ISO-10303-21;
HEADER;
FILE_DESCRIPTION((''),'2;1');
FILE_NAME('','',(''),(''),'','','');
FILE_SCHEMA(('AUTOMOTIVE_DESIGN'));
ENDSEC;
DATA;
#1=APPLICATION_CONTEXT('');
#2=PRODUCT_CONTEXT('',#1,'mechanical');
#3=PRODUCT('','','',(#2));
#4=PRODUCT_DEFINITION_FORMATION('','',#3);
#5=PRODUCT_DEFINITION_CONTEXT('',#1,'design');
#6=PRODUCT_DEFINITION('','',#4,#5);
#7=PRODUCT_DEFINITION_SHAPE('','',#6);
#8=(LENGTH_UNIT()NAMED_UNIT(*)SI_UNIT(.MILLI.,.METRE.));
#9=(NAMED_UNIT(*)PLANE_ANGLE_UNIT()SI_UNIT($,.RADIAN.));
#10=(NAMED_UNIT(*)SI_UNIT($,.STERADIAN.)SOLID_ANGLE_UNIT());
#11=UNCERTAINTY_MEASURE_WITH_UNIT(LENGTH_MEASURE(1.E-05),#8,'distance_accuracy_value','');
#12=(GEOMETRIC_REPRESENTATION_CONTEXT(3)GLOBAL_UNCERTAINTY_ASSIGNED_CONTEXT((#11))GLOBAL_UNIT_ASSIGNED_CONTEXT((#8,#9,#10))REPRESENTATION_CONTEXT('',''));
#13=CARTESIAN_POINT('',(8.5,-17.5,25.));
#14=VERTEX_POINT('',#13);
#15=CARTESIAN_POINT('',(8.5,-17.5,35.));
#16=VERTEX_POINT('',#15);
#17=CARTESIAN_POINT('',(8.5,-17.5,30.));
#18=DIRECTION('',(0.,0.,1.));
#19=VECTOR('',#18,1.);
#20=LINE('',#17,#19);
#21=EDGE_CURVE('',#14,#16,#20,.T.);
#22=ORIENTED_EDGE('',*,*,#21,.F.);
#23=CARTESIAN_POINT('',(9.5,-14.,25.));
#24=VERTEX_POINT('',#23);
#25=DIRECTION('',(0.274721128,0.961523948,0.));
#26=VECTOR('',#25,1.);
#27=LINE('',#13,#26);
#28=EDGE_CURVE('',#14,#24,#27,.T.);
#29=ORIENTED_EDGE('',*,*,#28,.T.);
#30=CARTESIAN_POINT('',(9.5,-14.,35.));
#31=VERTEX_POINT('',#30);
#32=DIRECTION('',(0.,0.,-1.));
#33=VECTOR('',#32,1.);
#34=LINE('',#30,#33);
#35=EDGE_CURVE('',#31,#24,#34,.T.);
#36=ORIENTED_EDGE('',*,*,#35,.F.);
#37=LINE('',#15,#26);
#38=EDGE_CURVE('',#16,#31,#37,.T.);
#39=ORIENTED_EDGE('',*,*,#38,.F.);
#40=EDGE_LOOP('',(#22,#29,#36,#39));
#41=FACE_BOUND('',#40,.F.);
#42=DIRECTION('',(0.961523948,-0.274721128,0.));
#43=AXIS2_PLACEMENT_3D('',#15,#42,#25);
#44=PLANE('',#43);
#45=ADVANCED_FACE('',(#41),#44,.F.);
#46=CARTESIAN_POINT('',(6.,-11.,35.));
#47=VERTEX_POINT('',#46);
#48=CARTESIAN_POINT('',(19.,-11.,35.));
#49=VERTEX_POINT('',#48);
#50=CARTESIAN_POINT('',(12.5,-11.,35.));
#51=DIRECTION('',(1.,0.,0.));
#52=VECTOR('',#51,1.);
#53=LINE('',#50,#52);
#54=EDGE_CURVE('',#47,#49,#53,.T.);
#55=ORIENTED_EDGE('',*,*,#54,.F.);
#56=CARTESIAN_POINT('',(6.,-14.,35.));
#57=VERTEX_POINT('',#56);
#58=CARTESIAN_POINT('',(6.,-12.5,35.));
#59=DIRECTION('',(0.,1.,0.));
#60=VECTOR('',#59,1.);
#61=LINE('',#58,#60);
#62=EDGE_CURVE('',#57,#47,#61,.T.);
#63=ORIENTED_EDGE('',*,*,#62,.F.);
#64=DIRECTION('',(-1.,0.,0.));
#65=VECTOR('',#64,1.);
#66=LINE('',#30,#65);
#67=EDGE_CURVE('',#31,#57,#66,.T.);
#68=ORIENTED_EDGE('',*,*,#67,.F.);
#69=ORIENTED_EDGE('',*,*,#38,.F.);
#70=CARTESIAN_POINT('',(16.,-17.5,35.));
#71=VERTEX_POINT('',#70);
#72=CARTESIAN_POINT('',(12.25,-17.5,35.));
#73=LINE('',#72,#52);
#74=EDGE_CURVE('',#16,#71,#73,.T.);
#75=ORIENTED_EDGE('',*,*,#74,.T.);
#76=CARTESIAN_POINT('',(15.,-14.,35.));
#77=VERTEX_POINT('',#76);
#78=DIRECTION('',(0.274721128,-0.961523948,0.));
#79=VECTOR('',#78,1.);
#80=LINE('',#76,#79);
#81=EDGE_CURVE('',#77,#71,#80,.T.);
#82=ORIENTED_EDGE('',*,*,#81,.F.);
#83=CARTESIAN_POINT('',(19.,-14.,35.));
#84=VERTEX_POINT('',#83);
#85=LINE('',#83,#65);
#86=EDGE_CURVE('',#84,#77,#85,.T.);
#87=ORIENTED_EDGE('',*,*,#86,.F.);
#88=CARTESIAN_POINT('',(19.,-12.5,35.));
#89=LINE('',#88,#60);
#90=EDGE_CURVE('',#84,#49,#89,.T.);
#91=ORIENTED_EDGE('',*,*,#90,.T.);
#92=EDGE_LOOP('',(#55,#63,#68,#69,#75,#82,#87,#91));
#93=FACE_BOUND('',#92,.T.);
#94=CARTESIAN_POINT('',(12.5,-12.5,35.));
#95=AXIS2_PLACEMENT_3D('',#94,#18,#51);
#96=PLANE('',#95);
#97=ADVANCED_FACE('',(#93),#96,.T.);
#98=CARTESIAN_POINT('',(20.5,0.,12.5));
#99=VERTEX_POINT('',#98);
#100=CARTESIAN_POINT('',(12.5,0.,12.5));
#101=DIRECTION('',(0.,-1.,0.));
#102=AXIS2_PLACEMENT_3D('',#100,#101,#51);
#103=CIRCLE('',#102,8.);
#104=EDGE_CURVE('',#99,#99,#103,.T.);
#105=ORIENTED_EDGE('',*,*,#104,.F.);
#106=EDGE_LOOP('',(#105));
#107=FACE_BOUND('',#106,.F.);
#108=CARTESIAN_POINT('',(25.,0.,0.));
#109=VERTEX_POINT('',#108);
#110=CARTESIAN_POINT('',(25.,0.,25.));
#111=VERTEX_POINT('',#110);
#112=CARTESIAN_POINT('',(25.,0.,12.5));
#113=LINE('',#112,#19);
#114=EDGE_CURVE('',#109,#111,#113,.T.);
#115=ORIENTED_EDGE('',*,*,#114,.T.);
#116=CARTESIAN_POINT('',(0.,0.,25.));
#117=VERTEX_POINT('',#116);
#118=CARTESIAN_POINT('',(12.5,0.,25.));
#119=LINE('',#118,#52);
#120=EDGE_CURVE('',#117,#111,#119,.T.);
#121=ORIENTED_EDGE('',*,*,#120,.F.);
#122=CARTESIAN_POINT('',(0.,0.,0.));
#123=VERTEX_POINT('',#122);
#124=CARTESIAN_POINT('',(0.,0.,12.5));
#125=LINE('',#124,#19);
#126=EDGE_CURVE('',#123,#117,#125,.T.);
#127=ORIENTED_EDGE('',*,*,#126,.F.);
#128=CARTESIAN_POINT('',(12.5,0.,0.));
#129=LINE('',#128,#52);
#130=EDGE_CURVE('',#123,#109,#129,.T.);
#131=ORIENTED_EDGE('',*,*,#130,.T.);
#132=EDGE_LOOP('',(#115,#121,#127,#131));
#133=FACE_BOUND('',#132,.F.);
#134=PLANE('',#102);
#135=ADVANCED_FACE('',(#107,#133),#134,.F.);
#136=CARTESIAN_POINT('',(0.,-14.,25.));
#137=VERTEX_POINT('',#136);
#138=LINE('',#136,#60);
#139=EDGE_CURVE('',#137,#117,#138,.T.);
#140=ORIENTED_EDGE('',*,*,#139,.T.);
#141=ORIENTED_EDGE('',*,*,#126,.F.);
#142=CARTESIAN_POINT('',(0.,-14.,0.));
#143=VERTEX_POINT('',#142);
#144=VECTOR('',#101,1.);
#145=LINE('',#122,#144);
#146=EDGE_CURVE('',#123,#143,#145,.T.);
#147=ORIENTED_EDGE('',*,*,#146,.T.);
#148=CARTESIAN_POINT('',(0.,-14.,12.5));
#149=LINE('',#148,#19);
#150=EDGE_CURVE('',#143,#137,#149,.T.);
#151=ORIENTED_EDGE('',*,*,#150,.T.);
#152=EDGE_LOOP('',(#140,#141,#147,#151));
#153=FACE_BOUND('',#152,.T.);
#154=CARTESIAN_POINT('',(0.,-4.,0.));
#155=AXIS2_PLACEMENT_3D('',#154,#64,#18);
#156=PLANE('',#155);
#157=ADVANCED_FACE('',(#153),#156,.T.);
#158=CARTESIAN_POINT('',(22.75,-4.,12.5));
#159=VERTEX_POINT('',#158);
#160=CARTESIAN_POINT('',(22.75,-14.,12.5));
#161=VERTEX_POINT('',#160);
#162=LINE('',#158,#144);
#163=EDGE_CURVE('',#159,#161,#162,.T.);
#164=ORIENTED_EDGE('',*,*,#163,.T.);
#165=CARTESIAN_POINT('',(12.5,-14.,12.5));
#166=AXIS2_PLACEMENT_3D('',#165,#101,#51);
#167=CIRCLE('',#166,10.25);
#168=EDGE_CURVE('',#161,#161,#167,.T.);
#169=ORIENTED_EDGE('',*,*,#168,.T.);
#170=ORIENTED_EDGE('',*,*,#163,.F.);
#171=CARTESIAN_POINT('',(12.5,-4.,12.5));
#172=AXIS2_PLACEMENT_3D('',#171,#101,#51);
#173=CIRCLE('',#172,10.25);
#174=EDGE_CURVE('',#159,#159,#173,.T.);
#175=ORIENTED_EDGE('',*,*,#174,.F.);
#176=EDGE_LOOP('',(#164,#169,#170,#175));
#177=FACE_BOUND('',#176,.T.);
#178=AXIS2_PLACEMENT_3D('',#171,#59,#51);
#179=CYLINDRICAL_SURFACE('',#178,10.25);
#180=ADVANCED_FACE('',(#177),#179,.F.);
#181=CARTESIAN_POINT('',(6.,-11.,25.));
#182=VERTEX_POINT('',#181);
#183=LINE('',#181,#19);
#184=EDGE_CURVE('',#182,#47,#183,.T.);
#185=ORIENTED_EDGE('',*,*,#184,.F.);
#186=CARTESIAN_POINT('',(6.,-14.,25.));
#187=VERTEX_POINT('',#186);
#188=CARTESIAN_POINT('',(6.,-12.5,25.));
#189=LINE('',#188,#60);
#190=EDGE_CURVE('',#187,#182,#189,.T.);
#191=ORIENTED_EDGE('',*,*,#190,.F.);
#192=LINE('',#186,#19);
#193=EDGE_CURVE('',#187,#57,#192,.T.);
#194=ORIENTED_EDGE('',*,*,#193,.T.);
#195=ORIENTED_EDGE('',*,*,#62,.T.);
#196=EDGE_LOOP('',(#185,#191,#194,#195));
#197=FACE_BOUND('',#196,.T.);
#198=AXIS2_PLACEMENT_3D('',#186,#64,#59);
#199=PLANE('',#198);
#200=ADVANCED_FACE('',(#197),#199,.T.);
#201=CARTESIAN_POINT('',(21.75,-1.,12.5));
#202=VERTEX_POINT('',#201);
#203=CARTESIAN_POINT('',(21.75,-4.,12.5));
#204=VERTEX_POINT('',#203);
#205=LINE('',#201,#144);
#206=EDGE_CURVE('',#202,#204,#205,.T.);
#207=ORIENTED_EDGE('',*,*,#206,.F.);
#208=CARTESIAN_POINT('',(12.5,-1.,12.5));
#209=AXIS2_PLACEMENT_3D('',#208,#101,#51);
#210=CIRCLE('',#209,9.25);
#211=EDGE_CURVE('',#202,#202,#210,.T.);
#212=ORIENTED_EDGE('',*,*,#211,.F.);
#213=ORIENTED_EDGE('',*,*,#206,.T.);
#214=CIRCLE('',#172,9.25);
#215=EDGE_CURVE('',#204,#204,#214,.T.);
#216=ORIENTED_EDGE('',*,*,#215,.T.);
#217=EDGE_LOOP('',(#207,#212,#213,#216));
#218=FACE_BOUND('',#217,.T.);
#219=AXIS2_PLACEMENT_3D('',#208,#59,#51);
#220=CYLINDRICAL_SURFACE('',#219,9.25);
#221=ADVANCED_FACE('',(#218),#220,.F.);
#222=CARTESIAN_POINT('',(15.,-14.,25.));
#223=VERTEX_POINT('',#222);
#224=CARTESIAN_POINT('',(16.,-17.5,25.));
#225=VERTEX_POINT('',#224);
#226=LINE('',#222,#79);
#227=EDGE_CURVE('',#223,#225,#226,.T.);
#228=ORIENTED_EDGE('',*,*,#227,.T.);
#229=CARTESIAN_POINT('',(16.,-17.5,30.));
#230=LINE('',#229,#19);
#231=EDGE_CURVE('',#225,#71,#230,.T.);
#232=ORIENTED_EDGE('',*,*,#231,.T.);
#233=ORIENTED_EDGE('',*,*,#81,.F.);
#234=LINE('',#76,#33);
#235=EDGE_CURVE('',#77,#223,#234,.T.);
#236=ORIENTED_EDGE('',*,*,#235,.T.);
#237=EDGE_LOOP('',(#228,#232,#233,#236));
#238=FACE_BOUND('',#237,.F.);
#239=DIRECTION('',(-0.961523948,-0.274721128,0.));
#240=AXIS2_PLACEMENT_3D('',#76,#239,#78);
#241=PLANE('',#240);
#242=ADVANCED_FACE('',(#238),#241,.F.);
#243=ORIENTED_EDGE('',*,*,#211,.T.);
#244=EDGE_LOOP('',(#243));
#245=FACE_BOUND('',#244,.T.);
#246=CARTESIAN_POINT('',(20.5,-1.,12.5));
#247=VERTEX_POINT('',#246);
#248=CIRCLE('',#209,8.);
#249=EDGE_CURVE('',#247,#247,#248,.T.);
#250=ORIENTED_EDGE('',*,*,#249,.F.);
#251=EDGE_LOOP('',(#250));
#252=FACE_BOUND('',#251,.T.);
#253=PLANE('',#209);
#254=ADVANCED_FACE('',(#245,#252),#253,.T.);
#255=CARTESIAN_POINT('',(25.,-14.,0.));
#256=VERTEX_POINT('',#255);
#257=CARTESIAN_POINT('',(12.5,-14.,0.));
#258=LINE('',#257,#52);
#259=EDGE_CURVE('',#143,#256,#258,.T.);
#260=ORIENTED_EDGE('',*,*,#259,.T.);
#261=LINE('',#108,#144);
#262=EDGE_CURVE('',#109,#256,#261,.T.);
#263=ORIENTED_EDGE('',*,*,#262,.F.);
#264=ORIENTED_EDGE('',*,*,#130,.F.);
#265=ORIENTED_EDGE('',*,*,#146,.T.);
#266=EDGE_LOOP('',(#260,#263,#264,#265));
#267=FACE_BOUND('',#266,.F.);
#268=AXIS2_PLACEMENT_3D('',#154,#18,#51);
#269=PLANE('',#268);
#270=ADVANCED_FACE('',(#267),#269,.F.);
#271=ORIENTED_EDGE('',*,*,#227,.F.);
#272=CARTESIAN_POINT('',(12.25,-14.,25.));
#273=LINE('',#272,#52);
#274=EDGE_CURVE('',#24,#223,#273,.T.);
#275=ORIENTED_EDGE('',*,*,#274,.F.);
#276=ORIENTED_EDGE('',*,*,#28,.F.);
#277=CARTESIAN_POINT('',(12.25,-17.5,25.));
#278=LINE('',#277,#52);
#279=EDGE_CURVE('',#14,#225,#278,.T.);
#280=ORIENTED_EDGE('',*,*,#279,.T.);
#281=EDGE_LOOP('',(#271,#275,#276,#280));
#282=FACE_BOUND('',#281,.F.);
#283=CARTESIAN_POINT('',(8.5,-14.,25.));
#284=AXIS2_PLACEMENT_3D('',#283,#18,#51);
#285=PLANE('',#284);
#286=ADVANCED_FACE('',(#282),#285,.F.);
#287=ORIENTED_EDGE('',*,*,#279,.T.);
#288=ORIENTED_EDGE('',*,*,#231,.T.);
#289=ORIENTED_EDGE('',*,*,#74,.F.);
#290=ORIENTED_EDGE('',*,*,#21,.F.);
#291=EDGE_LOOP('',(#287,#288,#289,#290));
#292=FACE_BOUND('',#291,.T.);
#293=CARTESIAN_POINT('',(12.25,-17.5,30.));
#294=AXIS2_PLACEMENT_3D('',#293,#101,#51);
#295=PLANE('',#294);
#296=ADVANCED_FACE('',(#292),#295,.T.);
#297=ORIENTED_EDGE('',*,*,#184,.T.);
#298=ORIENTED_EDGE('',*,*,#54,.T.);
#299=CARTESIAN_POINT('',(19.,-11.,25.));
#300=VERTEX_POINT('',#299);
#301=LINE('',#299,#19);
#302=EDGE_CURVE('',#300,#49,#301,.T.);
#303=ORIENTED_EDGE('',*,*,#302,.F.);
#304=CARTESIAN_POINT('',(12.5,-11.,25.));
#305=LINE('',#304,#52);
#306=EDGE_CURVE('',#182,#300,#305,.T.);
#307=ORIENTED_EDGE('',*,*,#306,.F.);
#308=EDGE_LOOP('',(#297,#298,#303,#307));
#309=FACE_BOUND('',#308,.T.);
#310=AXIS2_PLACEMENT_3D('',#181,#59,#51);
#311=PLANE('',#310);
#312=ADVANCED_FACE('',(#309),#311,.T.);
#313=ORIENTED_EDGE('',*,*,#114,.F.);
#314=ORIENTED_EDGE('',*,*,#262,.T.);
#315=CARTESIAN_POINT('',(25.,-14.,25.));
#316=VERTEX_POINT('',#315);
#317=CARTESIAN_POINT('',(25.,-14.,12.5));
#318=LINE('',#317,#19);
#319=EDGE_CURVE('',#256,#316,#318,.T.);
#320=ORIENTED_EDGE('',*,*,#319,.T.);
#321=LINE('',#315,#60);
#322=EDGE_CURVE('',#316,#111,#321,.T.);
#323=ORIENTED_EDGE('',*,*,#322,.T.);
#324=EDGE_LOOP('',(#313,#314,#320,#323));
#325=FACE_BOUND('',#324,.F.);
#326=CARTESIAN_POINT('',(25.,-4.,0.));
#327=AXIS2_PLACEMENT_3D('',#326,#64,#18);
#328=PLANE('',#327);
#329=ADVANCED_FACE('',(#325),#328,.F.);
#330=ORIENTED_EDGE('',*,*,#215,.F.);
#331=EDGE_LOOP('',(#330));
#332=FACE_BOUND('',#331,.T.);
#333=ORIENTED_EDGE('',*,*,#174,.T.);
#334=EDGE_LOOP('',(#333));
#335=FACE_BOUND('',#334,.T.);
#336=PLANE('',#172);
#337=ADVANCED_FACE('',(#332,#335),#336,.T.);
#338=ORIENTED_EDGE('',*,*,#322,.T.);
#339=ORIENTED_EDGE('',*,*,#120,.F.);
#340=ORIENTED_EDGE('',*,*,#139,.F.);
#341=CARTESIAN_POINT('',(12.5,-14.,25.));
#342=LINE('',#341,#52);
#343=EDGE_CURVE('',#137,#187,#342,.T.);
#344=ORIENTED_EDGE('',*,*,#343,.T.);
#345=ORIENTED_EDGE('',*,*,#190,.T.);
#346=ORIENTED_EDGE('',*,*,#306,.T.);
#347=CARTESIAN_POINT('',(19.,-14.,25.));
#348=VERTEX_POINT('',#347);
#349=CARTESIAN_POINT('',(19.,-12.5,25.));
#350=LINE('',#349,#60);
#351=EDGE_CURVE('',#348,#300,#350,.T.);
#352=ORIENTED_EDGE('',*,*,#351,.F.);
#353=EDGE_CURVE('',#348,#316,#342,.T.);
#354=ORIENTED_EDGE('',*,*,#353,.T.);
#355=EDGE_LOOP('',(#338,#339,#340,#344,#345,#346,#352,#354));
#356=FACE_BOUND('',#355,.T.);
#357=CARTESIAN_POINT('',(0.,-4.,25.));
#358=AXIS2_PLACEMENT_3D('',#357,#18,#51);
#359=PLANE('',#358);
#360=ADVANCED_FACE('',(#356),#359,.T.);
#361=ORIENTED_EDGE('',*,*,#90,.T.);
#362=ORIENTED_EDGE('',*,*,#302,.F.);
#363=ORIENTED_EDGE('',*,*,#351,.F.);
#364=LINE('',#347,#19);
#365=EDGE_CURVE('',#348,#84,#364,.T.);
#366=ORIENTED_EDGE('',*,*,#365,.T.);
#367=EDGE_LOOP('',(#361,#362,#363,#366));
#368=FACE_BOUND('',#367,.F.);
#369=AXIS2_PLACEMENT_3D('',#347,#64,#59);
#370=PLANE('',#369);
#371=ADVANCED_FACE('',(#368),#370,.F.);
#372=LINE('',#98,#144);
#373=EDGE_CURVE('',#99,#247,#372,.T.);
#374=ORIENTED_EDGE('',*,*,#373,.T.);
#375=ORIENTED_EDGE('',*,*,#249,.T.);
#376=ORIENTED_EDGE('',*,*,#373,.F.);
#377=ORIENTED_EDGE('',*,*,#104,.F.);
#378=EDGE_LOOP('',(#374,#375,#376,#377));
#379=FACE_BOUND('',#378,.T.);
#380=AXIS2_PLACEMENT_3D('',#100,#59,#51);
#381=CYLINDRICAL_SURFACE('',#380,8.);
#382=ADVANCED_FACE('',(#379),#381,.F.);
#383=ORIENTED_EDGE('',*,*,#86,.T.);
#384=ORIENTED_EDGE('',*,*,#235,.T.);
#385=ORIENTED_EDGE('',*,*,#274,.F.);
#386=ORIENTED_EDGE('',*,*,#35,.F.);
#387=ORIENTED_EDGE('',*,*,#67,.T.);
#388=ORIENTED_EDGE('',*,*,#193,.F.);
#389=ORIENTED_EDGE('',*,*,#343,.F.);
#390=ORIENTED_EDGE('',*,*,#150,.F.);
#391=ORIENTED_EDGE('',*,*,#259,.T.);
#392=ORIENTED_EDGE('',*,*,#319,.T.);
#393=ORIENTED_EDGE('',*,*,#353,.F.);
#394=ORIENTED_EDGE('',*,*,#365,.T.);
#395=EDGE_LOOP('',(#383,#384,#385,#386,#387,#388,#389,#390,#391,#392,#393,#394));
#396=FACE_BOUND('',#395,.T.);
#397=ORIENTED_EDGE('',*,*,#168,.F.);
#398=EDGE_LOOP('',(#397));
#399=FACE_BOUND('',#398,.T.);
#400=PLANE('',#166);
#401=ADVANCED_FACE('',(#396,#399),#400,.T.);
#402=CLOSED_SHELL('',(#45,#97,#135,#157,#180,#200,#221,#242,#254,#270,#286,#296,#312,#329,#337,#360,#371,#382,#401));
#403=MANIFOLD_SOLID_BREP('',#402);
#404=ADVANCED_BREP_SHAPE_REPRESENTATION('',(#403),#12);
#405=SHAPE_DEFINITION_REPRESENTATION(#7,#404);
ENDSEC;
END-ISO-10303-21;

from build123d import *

# Parameters (mm, degrees)
F0_W      = 25
F0_H      = 25
F0_R      = 10.25
F0_R_2    = 9.25
F0_R_3    = 8
F1_DEPTH  = 1
F2_W      = 25
F2_H      = 25
F2_R      = 9.25
F3_DEPTH  = 3
F4_W      = 25
F4_H      = 25
F4_R      = 10.25
F5_DEPTH  = 10
F6_W      = 13
F6_H      = 3
F7_DEPTH  = 10
F8_W      = 7.5
F8_H      = 10
F9_DEPTH  = 3.5
F11_DEPTH = 10
F12_DEPTH = 10


with BuildPart() as f1:
    # F0 (on Front) → F1 (new body)
    with BuildSketch(Plane.XZ):
        with Locations((12.5, 12.5)):
            Rectangle(F0_W, F0_H)
        with Locations((12.5, 12.5)):
            Circle(F0_R, mode=Mode.SUBTRACT)
        with Locations((12.5, 12.5)):
            Circle(F0_R)
        with Locations((12.5, 12.5)):
            Circle(F0_R_2, mode=Mode.SUBTRACT)
        with Locations((12.5, 12.5)):
            Circle(F0_R_2)
        with Locations((12.5, 12.5)):
            Circle(F0_R_3, mode=Mode.SUBTRACT)
    extrude(amount=F1_DEPTH)

    # F2 (on face) → F3 (join)
    with BuildSketch(Plane.XZ.offset(1)):
        with Locations((12.5, 12.5)):
            Rectangle(F2_W, F2_H)
        with Locations((12.5, 12.5)):
            Circle(F2_R, mode=Mode.SUBTRACT)
    extrude(amount=F3_DEPTH)

    # F4 (on face) → F5 (join)
    with BuildSketch(Plane.XZ.offset(4)):
        with Locations((12.5, 12.5)):
            Rectangle(F4_W, F4_H)
        with Locations((12.5, 12.5)):
            Circle(F4_R, mode=Mode.SUBTRACT)
    extrude(amount=F5_DEPTH)

    # F6 (on face) → F7 (join)
    with BuildSketch(Plane.XY.offset(25)):
        with Locations((12.5, -12.5)):
            Rectangle(F6_W, F6_H)
    extrude(amount=F7_DEPTH)

    # F8 (on face) → F9 (join)
    with BuildSketch(Plane.XZ.offset(14)):
        with Locations((12.25, 30)):
            Rectangle(F8_W, F8_H)
    extrude(amount=F9_DEPTH)

    # F10 (on face) → F11 (cut)
    with BuildSketch(Plane.XY.offset(35)):
        Polygon((8.5, -14), (8.5, -17.5), (9.5, -14), align=None)
    extrude(amount=-F11_DEPTH, mode=Mode.SUBTRACT)

    # F10 (on face) → F12 (cut)
    with BuildSketch(Plane.XY.offset(35)):
        Polygon((15, -14), (16, -17.5), (16, -14), align=None)
    extrude(amount=-F12_DEPTH, mode=Mode.SUBTRACT)


solid = f1.part
